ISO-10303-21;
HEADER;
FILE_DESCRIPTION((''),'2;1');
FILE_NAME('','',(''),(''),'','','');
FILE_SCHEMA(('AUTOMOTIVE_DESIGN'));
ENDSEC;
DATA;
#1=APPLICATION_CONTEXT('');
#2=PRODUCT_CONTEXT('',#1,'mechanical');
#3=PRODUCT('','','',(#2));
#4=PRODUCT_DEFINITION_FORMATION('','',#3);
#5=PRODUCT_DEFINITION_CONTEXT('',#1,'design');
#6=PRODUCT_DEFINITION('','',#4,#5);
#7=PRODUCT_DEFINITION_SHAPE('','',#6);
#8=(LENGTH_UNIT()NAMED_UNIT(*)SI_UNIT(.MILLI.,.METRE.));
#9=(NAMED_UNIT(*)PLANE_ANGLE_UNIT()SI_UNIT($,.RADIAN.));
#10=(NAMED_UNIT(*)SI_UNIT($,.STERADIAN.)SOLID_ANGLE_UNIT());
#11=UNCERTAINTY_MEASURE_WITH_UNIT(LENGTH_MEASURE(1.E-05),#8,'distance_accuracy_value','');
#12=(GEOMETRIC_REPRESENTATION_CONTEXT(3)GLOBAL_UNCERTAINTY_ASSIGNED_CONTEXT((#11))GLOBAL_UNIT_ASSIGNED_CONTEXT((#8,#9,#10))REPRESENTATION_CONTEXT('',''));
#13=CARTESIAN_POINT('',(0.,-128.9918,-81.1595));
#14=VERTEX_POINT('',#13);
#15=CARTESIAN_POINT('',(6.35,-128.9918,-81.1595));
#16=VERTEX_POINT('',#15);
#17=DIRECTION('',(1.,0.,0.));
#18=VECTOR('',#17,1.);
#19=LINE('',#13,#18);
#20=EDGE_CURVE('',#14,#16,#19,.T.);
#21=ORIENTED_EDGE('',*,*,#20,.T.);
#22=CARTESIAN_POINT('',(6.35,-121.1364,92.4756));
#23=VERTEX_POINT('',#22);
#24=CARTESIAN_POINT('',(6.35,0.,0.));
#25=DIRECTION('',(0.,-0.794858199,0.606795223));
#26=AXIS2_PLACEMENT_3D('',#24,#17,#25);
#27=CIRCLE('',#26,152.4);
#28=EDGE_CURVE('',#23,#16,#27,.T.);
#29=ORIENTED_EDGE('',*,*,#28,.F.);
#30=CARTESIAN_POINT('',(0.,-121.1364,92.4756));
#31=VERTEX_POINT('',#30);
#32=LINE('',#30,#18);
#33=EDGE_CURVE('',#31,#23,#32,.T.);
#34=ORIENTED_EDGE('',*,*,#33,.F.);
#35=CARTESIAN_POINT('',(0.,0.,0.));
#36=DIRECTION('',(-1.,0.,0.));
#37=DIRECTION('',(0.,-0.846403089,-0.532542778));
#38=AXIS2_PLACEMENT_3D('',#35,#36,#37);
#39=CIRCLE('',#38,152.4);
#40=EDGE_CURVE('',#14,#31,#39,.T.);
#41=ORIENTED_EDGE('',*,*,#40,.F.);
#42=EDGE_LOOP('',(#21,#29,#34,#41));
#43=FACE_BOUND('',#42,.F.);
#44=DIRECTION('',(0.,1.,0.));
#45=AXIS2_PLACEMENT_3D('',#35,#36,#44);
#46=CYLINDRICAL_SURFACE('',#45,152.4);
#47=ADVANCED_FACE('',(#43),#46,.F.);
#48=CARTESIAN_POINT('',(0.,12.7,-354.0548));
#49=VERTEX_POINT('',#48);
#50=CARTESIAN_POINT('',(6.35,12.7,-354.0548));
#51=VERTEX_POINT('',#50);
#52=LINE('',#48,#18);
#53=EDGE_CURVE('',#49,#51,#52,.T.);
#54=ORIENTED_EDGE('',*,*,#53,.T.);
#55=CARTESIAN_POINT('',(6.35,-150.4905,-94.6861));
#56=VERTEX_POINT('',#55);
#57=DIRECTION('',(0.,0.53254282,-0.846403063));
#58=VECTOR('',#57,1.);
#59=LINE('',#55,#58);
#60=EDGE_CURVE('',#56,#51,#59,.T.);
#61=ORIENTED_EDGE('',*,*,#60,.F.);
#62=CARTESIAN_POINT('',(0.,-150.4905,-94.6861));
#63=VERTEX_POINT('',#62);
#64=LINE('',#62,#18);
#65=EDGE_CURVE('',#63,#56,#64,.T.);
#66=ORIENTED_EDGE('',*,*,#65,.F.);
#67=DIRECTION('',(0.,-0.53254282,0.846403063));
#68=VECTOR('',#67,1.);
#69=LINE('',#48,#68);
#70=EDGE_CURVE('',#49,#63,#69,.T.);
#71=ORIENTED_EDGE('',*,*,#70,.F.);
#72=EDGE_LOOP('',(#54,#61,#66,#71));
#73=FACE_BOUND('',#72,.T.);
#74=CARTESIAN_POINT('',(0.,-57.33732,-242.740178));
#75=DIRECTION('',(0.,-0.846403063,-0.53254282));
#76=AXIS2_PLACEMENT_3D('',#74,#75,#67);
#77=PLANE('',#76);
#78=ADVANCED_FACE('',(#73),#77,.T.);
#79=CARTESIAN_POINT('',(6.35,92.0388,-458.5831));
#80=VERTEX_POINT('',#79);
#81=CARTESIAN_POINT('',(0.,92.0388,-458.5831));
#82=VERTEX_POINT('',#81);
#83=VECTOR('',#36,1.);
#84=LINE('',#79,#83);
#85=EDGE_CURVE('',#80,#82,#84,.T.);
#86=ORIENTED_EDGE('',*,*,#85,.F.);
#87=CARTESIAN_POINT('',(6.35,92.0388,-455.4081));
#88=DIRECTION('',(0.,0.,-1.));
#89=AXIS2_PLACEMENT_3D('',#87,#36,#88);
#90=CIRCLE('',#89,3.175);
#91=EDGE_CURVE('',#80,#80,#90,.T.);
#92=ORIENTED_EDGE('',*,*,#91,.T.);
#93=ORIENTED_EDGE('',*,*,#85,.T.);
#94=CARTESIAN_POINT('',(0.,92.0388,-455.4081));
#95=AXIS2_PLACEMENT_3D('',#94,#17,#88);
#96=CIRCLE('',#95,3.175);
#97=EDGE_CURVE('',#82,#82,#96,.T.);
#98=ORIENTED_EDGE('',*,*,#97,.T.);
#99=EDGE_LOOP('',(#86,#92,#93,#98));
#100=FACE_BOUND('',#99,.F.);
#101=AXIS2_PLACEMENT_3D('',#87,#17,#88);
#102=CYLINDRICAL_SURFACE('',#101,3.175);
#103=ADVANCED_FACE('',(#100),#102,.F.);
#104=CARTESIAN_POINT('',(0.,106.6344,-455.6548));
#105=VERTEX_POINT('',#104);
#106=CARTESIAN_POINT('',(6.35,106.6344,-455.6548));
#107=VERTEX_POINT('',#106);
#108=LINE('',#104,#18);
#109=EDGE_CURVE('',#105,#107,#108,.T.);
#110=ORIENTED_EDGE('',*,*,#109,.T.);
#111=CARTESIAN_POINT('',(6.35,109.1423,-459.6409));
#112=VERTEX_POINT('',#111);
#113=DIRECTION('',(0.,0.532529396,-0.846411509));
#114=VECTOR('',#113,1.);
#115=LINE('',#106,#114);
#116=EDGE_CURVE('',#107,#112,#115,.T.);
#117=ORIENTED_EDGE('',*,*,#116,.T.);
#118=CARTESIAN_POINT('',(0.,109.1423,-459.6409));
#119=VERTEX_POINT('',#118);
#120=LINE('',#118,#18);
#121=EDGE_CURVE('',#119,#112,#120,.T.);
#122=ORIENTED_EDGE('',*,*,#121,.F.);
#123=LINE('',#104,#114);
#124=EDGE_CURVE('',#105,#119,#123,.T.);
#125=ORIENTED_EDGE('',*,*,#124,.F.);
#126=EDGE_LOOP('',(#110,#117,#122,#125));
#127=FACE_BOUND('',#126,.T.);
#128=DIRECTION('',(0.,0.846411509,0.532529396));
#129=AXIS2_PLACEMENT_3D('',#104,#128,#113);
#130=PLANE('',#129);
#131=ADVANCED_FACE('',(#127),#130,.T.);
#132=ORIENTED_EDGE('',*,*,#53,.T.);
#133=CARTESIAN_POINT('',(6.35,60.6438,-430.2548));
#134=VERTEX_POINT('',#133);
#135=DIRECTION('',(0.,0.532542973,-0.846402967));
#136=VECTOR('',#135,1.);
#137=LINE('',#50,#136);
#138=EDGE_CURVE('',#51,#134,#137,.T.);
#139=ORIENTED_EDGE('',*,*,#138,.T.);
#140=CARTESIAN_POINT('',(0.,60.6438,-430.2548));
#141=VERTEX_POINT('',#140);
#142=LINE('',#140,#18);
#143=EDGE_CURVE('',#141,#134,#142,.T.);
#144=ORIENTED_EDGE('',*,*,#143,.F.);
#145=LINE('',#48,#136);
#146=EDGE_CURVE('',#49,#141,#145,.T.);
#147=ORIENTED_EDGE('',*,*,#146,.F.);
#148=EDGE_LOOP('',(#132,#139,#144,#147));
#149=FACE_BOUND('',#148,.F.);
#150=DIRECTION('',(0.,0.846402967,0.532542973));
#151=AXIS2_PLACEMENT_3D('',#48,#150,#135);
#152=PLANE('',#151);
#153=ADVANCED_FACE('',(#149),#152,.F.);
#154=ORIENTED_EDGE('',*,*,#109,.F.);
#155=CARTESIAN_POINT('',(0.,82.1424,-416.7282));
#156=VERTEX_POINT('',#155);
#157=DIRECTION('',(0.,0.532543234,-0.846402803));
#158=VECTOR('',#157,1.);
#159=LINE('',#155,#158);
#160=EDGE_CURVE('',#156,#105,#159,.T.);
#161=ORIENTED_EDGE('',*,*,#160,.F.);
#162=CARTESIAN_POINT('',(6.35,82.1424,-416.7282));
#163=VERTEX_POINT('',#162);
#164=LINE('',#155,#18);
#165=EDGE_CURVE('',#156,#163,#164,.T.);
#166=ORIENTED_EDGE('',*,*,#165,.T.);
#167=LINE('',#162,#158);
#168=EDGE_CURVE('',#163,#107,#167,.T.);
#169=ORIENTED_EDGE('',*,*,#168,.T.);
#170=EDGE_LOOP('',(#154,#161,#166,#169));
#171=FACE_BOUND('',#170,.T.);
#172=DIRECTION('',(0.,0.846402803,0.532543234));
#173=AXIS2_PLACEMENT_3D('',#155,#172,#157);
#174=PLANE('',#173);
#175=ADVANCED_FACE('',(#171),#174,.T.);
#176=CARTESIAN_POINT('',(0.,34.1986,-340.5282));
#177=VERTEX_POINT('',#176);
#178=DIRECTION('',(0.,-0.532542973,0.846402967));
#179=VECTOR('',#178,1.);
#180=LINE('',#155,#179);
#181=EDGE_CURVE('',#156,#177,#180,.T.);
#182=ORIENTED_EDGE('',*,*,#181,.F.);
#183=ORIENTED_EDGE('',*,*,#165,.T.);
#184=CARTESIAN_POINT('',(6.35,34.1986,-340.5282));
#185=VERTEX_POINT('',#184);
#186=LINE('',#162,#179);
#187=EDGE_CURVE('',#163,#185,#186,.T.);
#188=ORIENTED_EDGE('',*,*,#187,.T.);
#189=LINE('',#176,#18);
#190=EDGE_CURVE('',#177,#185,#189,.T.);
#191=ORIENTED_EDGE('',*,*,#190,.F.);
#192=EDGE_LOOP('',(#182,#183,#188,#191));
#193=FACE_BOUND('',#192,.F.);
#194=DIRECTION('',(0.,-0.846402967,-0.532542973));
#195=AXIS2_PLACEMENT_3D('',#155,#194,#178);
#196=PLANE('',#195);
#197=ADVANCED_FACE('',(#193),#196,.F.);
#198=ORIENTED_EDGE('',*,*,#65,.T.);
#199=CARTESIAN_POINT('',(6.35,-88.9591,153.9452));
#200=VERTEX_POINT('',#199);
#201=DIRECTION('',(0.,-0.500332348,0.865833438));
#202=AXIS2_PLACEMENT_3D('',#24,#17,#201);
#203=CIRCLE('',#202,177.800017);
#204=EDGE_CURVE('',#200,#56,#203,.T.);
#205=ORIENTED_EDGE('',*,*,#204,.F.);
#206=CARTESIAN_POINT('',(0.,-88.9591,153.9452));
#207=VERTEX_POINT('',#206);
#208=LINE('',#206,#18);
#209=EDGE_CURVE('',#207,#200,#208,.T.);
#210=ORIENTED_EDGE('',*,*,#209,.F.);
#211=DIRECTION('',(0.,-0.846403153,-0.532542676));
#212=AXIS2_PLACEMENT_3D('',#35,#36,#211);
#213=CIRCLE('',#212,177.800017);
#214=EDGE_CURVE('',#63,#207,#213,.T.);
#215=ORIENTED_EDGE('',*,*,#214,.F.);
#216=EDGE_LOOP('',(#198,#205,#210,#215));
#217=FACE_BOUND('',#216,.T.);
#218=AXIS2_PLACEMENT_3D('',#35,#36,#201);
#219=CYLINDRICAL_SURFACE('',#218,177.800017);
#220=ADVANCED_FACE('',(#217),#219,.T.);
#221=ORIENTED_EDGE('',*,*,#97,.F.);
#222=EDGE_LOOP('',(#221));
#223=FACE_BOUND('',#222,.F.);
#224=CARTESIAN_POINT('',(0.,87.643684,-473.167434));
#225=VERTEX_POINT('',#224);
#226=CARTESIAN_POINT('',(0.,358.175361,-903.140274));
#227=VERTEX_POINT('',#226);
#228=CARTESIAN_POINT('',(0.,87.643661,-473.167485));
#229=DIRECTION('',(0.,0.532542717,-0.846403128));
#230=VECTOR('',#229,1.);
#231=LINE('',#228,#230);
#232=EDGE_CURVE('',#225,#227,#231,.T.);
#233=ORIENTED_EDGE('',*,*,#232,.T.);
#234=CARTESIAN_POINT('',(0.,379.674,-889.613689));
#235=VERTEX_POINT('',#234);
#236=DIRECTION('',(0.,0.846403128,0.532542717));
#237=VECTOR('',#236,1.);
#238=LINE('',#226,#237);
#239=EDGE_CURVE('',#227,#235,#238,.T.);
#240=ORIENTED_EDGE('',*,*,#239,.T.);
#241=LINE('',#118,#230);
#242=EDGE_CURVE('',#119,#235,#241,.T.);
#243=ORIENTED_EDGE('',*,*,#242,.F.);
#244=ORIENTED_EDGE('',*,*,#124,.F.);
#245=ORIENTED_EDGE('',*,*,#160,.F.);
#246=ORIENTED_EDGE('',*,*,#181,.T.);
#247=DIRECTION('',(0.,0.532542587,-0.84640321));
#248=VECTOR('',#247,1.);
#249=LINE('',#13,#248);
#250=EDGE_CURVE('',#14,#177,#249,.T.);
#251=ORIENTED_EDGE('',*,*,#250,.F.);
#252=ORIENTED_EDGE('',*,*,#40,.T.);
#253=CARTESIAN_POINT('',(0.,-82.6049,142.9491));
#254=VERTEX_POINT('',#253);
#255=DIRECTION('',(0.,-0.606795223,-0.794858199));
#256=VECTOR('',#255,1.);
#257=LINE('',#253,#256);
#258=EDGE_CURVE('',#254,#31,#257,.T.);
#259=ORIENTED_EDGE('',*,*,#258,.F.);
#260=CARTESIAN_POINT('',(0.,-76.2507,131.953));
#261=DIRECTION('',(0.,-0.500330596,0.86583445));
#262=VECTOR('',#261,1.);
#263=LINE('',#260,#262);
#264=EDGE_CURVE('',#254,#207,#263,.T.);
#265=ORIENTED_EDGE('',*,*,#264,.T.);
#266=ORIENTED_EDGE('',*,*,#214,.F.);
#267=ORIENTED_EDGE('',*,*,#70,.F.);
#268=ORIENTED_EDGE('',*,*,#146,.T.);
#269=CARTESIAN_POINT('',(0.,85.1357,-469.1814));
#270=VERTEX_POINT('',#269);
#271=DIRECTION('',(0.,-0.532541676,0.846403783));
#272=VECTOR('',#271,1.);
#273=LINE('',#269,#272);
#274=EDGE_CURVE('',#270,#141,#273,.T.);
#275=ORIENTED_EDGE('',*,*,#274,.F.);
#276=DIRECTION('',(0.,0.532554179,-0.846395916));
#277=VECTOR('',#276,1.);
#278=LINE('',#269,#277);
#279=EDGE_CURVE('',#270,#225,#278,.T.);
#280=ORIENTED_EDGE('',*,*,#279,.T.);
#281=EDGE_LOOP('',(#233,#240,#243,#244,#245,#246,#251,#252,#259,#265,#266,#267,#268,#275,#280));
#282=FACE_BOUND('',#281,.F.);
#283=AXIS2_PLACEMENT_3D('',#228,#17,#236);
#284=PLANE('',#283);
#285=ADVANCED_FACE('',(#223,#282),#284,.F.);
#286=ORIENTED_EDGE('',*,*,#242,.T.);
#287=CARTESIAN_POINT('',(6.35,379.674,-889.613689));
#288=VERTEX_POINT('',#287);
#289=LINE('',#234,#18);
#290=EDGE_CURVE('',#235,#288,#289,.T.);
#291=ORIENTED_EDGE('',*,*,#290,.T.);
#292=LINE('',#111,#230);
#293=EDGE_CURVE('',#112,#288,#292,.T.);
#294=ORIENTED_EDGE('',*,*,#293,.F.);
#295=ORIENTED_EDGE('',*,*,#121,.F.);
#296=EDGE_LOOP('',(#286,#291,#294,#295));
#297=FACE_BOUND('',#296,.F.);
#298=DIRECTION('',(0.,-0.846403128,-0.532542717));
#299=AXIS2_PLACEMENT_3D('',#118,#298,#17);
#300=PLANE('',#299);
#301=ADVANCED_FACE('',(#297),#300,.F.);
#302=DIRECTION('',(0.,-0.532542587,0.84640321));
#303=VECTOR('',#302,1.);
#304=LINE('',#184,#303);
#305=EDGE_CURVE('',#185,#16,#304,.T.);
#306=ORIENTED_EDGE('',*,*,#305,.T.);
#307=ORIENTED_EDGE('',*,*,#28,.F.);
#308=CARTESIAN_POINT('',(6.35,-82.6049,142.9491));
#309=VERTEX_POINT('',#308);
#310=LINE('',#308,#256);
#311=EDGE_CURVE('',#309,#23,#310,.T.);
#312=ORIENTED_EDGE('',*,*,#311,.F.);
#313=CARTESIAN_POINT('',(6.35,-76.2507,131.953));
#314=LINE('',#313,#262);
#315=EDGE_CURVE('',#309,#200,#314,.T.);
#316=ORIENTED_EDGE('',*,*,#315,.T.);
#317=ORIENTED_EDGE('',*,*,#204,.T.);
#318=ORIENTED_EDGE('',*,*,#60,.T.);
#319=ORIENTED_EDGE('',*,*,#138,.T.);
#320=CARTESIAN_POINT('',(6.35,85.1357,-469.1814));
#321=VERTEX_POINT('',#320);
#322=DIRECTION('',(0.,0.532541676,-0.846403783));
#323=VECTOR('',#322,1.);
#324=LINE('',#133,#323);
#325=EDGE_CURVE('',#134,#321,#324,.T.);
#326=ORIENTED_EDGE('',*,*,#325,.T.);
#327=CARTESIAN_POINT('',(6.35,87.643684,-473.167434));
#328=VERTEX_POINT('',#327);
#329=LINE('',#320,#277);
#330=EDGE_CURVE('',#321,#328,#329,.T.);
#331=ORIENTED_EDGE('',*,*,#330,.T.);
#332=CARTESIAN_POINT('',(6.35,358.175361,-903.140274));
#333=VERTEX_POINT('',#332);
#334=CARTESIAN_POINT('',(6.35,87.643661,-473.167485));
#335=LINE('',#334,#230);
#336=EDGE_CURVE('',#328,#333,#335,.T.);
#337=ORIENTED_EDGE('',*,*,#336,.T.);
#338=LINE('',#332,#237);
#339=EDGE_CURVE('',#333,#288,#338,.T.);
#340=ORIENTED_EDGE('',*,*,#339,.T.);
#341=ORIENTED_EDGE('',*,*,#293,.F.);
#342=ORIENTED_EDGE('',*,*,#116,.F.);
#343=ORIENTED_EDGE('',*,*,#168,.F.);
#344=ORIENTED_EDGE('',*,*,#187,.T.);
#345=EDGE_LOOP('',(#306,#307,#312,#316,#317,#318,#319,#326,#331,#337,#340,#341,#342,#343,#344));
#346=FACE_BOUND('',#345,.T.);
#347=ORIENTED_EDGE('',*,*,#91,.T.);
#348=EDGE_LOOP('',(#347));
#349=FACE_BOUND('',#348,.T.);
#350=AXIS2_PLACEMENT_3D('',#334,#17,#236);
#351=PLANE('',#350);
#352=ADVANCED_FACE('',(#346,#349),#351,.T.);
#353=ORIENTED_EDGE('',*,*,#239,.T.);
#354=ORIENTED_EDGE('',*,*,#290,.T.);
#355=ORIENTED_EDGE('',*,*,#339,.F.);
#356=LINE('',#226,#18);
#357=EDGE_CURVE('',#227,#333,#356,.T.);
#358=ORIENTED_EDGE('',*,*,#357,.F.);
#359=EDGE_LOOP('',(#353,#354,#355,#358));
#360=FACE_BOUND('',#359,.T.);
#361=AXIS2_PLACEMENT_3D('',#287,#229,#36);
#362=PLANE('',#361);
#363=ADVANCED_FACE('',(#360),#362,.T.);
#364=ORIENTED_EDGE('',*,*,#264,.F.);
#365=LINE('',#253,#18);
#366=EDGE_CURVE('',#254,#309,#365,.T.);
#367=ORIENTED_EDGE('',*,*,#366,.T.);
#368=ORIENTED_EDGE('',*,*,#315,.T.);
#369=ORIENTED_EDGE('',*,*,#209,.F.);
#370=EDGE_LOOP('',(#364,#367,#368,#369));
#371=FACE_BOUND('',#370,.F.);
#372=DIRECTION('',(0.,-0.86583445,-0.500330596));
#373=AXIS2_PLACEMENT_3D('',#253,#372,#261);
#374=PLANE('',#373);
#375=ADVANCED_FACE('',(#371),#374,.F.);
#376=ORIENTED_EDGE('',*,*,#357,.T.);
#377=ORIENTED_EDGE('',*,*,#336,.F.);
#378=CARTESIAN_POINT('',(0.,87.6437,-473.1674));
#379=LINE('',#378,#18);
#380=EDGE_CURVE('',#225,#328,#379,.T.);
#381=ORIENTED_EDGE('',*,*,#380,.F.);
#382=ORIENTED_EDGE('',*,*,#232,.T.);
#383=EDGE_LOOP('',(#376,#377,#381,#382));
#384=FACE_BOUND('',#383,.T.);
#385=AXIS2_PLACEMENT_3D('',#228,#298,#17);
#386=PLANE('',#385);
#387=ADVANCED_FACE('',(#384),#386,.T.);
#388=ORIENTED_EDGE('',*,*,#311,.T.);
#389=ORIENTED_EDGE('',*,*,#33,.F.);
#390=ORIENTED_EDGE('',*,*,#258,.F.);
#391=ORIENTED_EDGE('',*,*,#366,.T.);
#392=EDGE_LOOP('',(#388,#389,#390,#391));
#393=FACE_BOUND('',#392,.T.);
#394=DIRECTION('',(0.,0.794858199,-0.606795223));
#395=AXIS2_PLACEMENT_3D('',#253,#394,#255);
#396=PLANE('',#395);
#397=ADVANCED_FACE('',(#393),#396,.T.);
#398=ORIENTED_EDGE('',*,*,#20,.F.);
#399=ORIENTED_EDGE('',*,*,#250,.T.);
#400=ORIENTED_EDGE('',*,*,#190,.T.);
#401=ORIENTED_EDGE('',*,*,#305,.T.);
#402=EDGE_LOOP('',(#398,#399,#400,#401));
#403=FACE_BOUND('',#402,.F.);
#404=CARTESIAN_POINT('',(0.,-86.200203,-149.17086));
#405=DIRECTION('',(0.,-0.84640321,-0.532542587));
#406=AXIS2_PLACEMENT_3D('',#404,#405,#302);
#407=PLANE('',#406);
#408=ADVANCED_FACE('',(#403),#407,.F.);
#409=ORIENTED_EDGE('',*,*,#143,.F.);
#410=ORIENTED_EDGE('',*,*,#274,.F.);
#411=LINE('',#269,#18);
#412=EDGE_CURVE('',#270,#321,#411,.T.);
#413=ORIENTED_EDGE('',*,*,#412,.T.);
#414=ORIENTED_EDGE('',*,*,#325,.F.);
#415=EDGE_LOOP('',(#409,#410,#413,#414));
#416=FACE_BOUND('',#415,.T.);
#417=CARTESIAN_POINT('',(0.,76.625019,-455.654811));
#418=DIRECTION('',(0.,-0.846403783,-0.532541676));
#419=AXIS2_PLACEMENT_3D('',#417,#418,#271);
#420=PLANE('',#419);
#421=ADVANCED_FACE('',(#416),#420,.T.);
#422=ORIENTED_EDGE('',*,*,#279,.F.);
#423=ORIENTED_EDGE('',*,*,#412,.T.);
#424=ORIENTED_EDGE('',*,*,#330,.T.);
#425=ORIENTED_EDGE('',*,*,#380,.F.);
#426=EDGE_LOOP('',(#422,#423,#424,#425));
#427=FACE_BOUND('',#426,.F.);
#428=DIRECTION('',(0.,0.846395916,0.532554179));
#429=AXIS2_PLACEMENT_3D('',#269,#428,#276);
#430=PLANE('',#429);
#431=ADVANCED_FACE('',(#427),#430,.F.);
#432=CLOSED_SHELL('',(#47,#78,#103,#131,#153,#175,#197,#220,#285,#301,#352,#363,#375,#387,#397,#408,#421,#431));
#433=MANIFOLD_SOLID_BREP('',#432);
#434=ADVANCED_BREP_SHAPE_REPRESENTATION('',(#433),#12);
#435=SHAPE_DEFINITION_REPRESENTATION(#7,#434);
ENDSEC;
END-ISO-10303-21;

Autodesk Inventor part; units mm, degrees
ref_plane "YZ Plane" through (0, 0, 0) normal (1, 0, 0) x (0, 1, 0)
ref_plane "XZ Plane" through (0, 0, 0) normal (0, 1, 0) x (-1, 0, 0)
ref_plane "XY Plane" through (0, 0, 0) normal (0, 0, 1) x (1, 0, 0)
sketch "Sketch1" plane through (0, 0, 0) normal (1, 0, 0) x (0, 1, 0)
  circle A0 centre (0, 0) radius 152.4
  line L0 (-76.2507, 131.953) -> (76.2507, 131.953)
  line L1 (76.2507, 131.953) -> (76.2507, -131.953)
  line L2 (76.2507, -131.953) -> (-76.2507, -131.953)
  line L3 (-76.2507, -131.953) -> (-76.2507, 131.953)
  line L4 (-76.2507, 131.953) -> (76.2507, -131.953) construction
  line L5 (76.2507, 131.953) -> (-76.2507, -131.953) construction
  line L6 (-76.2507, 131.953) -> (-88.9591, 153.9452)
  line L7 (-76.2507, -131.953) -> (-88.9591, -153.9452)
  arc A1 (-88.9591, 153.9452) -> (-88.9591, -153.9452) centre (0, 0) ccw
  line L8 (-88.9591, 153.9452) -> (-177.8, 153.9452)
  line L9 (-177.8, 153.9452) -> (-177.8, -354.0548)
  line L10 (-177.8, -354.0548) -> (0, -354.0548)
  line L11 (0, -354.0548) -> (0, -430.2548)
  line L12 (0, -430.2548) -> (-127, -430.2548)
  line L13 (-127, -430.2548) -> (-127, -354.0548)
  line L14 (-127, -430.2548) -> (-177.8, -430.2548)
  line L15 (-177.8, -430.2548) -> (-177.8, -354.0548)
  line L16 (0, -354.0548) -> (12.7, -354.0548)
  line L17 (12.7, -354.0548) -> (-150.4905, -94.6861)
  line L18 (12.7, -354.0548) -> (34.1986, -340.5282)
  line L19 (34.1986, -340.5282) -> (-128.9918, -81.1595)
  line L20 (12.7, -354.0548) -> (60.6438, -430.2548)
  line L21 (60.6438, -430.2548) -> (82.1424, -416.7282)
  line L22 (82.1424, -416.7282) -> (34.1986, -340.5282)
  line L23 (-177.8, 0) -> (127, 0)
  circle A2 centre (127, 0) radius 304.8
  line L24 (-82.6049, 142.9491) -> (-121.1364, 92.4756)
  line L25 (0, -430.2548) -> (0, -455.6548)
  line L26 (0, -455.6548) -> (235.9429, -455.6548)
  line L27 (82.1424, -416.7282) -> (106.6344, -455.6548)
  line L28 (106.6344, -455.6548) -> (85.1357, -469.1814)
  line L29 (85.1357, -469.1814) -> (60.6438, -430.2548)
  line L30 (95.885, -462.4181) -> (91.6297, -455.6548)
  line L31 (91.6297, -455.6548) -> (98.393, -466.4042)
  line L32 (98.393, -466.4042) -> (120.7006, -452.3686)
  line L33 (106.6344, -455.6548) -> (109.1423, -459.6409)
  line L34 (98.393, -466.4042) -> (67.8539, -485.6188)
  line L35 (85.1357, -469.1814) -> (87.6437, -473.1674)
  line L36 (109.1423, -459.6409) -> (87.6437, -473.1674)
  arc A3 (-88.9591, 153.9452) -> (-150.4905, -94.6861) centre (0, 0) ccw
  line L37 (-128.9918, -81.1595) -> (109.1423, -459.6409)
  line L38 (-150.4905, -94.6861) -> (87.6437, -473.1674)
  line L39 (87.6437, -473.1674) -> (109.1423, -459.6409)
  dimension "d5" = 304.8
  dimension "d6" = 263.906
  dimension "d7" = 25.4
  dimension "d8" = 25.4
  dimension "d9" = 508
  dimension "d10" = 76.2
  dimension "d11" = 127
  dimension "d12" = 12.7
  dimension "d13" = 25.4
  dimension "d14" = 25.4
  dimension "d15" = 304.8
  dimension "d16" = 25.4
  dimension "d17" = 12.7
extrude "Extrusion1" add sketch "Sketch1" along normal blind 6.35 contours A0 L23 A1 L6 L24 | L19 L7 A1 L23 A0 | L19 A2 L17 A1 L7 | L19 L18 L17 A2 | L22 L21 L20 L18 | L27 L26 L29 L21 | L28 L30 L26 | L33 L32 L31 L28 | L26 L30 L28 L29 | L31 L34 L35 L28
sketch "Sketch2" plane through (6.35, 0, 0) normal (1, 0, 0) x (0, 0, -1)
  line L0 (473.1674, 87.6437) -> (459.6409, 109.1423) projected
  line L1 (-142.9491, -82.6049) -> (-153.9452, -88.9591) projected
  line L2 (466.4042, 98.393) -> (455.4081, 92.0388)
  circle A0 centre (455.4081, 92.0388) radius 3.175
  dimension "d20" = 12.7
  dimension "d21" = 6.35
extrude "Extrusion2" cut sketch "Sketch2" against normal blind 25.4
sketch "Sketch3" plane through (6.35, 109.1423, -459.6409) normal (0, 0.5325427, -0.8464031) x (-1, 0, 0)
  line L0 (6.35, -25.4) -> (6.35, 0) projected
  line L1 (6.35, 0) -> (0, 0) projected
  line L2 (0, -25.4) -> (0, 0) projected
  line L3 (6.35, -25.4) -> (0, -25.4) projected
  point P0 (6.35, 152.4)
extrude "Extrusion3" add sketch "Sketch3" along normal blind 508
properties part number "MammothTusk"
